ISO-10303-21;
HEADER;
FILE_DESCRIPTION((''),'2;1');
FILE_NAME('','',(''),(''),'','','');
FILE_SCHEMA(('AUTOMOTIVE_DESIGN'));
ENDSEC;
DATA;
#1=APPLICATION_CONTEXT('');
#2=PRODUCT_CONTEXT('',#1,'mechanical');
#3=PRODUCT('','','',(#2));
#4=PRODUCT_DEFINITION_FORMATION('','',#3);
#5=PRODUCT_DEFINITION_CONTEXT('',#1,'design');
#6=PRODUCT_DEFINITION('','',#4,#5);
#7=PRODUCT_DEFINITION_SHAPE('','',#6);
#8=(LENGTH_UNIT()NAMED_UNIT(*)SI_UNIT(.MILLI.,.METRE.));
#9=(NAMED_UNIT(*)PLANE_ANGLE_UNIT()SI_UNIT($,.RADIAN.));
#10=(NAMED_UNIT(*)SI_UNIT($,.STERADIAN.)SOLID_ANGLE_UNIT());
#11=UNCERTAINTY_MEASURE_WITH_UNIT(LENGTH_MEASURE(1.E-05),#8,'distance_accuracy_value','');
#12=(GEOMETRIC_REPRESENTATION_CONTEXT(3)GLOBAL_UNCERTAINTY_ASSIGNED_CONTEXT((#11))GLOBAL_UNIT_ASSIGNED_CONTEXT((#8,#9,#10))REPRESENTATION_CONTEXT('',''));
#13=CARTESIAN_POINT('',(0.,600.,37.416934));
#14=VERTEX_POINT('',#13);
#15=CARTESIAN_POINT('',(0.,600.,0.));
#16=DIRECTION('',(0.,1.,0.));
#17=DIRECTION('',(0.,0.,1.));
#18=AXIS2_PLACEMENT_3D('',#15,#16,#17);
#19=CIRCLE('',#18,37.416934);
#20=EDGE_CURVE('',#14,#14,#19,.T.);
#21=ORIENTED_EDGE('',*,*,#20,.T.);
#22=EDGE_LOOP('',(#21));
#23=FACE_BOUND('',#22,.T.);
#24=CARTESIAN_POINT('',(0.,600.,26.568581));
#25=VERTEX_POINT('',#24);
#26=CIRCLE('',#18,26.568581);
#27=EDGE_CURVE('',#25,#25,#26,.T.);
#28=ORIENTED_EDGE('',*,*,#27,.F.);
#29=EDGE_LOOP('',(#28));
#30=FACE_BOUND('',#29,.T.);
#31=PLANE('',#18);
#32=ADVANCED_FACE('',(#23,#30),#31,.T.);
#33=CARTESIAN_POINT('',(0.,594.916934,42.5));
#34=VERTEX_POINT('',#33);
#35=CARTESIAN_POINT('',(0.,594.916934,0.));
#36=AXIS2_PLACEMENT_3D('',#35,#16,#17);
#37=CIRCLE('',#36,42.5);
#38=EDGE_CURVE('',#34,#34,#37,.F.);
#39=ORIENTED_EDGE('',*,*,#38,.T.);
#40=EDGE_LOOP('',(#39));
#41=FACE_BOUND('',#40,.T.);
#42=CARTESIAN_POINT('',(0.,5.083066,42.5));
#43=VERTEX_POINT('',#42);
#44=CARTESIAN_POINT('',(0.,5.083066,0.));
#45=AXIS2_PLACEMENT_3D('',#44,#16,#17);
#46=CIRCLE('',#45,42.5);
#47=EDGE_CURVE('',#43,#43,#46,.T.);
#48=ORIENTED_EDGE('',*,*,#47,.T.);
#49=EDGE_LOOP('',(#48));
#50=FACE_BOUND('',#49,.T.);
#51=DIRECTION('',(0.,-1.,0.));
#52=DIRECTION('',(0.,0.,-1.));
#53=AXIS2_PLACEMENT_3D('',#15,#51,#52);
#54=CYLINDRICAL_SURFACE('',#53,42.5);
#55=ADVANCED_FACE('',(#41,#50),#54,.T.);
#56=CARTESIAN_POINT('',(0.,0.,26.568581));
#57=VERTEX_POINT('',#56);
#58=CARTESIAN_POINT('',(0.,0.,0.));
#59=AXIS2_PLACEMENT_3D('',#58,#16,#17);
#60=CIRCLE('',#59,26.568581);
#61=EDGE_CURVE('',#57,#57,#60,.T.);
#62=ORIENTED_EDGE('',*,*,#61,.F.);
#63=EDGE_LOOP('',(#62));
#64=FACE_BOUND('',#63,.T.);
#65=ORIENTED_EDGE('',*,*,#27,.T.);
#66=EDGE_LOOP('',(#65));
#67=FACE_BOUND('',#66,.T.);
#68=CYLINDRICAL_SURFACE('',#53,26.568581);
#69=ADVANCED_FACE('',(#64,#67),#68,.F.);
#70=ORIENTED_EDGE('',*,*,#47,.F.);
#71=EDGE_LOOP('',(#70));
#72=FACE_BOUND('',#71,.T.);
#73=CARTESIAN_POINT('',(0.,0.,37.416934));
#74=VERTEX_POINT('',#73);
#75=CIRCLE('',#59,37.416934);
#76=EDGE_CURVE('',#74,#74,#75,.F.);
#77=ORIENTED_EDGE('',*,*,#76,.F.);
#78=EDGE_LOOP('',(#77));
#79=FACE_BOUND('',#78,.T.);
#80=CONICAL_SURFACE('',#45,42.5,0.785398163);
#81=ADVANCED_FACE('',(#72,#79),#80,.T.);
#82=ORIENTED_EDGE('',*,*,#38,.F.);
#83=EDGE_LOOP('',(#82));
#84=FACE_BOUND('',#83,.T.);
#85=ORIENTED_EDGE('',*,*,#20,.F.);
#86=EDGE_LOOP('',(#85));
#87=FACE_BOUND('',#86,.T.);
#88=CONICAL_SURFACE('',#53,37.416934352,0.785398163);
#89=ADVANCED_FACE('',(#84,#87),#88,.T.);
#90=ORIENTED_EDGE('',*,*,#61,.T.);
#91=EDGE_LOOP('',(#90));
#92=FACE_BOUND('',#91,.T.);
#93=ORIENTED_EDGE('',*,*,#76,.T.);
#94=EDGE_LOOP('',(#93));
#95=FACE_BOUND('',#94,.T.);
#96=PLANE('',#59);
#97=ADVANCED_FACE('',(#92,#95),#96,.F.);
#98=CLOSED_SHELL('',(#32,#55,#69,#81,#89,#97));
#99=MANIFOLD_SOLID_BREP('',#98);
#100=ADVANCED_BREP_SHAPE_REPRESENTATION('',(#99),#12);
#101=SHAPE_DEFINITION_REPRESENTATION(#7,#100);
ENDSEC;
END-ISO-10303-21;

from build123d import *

# Parameters (mm, degrees)
SKETCH1_R           = 42.5
BOSS_EXTRUDE1_DEPTH = 600
SKETCH2_R           = 26.568581298
CUT_EXTRUDE1_DEPTH  = 604.002902149
CHAMFER1_SIZE       = 5.083065648


with BuildPart() as part:
    # Sketch1 → Boss-Extrude1 (new body)
    with BuildSketch(Plane(origin=(0, 0, 0), x_dir=(1, 0, 0), z_dir=(0, 1, 0))):
        Circle(SKETCH1_R)
    extrude(amount=BOSS_EXTRUDE1_DEPTH)

    # Sketch2 → Cut-Extrude1 (cut, through all)
    with BuildSketch(Plane(origin=(0, 0, 0), x_dir=(1, 0, 0), z_dir=(0, 1, 0))):
        Circle(SKETCH2_R)
    extrude(amount=CUT_EXTRUDE1_DEPTH, mode=Mode.SUBTRACT)

    # Chamfer1
    chamfer1_edges = [part.edges().sort_by_distance(p)[0] for p in [
        (-42.5, 600, 0),
        (-42.5, 0, 0),
    ]]
    chamfer(chamfer1_edges, length=CHAMFER1_SIZE)


solid = part.part
